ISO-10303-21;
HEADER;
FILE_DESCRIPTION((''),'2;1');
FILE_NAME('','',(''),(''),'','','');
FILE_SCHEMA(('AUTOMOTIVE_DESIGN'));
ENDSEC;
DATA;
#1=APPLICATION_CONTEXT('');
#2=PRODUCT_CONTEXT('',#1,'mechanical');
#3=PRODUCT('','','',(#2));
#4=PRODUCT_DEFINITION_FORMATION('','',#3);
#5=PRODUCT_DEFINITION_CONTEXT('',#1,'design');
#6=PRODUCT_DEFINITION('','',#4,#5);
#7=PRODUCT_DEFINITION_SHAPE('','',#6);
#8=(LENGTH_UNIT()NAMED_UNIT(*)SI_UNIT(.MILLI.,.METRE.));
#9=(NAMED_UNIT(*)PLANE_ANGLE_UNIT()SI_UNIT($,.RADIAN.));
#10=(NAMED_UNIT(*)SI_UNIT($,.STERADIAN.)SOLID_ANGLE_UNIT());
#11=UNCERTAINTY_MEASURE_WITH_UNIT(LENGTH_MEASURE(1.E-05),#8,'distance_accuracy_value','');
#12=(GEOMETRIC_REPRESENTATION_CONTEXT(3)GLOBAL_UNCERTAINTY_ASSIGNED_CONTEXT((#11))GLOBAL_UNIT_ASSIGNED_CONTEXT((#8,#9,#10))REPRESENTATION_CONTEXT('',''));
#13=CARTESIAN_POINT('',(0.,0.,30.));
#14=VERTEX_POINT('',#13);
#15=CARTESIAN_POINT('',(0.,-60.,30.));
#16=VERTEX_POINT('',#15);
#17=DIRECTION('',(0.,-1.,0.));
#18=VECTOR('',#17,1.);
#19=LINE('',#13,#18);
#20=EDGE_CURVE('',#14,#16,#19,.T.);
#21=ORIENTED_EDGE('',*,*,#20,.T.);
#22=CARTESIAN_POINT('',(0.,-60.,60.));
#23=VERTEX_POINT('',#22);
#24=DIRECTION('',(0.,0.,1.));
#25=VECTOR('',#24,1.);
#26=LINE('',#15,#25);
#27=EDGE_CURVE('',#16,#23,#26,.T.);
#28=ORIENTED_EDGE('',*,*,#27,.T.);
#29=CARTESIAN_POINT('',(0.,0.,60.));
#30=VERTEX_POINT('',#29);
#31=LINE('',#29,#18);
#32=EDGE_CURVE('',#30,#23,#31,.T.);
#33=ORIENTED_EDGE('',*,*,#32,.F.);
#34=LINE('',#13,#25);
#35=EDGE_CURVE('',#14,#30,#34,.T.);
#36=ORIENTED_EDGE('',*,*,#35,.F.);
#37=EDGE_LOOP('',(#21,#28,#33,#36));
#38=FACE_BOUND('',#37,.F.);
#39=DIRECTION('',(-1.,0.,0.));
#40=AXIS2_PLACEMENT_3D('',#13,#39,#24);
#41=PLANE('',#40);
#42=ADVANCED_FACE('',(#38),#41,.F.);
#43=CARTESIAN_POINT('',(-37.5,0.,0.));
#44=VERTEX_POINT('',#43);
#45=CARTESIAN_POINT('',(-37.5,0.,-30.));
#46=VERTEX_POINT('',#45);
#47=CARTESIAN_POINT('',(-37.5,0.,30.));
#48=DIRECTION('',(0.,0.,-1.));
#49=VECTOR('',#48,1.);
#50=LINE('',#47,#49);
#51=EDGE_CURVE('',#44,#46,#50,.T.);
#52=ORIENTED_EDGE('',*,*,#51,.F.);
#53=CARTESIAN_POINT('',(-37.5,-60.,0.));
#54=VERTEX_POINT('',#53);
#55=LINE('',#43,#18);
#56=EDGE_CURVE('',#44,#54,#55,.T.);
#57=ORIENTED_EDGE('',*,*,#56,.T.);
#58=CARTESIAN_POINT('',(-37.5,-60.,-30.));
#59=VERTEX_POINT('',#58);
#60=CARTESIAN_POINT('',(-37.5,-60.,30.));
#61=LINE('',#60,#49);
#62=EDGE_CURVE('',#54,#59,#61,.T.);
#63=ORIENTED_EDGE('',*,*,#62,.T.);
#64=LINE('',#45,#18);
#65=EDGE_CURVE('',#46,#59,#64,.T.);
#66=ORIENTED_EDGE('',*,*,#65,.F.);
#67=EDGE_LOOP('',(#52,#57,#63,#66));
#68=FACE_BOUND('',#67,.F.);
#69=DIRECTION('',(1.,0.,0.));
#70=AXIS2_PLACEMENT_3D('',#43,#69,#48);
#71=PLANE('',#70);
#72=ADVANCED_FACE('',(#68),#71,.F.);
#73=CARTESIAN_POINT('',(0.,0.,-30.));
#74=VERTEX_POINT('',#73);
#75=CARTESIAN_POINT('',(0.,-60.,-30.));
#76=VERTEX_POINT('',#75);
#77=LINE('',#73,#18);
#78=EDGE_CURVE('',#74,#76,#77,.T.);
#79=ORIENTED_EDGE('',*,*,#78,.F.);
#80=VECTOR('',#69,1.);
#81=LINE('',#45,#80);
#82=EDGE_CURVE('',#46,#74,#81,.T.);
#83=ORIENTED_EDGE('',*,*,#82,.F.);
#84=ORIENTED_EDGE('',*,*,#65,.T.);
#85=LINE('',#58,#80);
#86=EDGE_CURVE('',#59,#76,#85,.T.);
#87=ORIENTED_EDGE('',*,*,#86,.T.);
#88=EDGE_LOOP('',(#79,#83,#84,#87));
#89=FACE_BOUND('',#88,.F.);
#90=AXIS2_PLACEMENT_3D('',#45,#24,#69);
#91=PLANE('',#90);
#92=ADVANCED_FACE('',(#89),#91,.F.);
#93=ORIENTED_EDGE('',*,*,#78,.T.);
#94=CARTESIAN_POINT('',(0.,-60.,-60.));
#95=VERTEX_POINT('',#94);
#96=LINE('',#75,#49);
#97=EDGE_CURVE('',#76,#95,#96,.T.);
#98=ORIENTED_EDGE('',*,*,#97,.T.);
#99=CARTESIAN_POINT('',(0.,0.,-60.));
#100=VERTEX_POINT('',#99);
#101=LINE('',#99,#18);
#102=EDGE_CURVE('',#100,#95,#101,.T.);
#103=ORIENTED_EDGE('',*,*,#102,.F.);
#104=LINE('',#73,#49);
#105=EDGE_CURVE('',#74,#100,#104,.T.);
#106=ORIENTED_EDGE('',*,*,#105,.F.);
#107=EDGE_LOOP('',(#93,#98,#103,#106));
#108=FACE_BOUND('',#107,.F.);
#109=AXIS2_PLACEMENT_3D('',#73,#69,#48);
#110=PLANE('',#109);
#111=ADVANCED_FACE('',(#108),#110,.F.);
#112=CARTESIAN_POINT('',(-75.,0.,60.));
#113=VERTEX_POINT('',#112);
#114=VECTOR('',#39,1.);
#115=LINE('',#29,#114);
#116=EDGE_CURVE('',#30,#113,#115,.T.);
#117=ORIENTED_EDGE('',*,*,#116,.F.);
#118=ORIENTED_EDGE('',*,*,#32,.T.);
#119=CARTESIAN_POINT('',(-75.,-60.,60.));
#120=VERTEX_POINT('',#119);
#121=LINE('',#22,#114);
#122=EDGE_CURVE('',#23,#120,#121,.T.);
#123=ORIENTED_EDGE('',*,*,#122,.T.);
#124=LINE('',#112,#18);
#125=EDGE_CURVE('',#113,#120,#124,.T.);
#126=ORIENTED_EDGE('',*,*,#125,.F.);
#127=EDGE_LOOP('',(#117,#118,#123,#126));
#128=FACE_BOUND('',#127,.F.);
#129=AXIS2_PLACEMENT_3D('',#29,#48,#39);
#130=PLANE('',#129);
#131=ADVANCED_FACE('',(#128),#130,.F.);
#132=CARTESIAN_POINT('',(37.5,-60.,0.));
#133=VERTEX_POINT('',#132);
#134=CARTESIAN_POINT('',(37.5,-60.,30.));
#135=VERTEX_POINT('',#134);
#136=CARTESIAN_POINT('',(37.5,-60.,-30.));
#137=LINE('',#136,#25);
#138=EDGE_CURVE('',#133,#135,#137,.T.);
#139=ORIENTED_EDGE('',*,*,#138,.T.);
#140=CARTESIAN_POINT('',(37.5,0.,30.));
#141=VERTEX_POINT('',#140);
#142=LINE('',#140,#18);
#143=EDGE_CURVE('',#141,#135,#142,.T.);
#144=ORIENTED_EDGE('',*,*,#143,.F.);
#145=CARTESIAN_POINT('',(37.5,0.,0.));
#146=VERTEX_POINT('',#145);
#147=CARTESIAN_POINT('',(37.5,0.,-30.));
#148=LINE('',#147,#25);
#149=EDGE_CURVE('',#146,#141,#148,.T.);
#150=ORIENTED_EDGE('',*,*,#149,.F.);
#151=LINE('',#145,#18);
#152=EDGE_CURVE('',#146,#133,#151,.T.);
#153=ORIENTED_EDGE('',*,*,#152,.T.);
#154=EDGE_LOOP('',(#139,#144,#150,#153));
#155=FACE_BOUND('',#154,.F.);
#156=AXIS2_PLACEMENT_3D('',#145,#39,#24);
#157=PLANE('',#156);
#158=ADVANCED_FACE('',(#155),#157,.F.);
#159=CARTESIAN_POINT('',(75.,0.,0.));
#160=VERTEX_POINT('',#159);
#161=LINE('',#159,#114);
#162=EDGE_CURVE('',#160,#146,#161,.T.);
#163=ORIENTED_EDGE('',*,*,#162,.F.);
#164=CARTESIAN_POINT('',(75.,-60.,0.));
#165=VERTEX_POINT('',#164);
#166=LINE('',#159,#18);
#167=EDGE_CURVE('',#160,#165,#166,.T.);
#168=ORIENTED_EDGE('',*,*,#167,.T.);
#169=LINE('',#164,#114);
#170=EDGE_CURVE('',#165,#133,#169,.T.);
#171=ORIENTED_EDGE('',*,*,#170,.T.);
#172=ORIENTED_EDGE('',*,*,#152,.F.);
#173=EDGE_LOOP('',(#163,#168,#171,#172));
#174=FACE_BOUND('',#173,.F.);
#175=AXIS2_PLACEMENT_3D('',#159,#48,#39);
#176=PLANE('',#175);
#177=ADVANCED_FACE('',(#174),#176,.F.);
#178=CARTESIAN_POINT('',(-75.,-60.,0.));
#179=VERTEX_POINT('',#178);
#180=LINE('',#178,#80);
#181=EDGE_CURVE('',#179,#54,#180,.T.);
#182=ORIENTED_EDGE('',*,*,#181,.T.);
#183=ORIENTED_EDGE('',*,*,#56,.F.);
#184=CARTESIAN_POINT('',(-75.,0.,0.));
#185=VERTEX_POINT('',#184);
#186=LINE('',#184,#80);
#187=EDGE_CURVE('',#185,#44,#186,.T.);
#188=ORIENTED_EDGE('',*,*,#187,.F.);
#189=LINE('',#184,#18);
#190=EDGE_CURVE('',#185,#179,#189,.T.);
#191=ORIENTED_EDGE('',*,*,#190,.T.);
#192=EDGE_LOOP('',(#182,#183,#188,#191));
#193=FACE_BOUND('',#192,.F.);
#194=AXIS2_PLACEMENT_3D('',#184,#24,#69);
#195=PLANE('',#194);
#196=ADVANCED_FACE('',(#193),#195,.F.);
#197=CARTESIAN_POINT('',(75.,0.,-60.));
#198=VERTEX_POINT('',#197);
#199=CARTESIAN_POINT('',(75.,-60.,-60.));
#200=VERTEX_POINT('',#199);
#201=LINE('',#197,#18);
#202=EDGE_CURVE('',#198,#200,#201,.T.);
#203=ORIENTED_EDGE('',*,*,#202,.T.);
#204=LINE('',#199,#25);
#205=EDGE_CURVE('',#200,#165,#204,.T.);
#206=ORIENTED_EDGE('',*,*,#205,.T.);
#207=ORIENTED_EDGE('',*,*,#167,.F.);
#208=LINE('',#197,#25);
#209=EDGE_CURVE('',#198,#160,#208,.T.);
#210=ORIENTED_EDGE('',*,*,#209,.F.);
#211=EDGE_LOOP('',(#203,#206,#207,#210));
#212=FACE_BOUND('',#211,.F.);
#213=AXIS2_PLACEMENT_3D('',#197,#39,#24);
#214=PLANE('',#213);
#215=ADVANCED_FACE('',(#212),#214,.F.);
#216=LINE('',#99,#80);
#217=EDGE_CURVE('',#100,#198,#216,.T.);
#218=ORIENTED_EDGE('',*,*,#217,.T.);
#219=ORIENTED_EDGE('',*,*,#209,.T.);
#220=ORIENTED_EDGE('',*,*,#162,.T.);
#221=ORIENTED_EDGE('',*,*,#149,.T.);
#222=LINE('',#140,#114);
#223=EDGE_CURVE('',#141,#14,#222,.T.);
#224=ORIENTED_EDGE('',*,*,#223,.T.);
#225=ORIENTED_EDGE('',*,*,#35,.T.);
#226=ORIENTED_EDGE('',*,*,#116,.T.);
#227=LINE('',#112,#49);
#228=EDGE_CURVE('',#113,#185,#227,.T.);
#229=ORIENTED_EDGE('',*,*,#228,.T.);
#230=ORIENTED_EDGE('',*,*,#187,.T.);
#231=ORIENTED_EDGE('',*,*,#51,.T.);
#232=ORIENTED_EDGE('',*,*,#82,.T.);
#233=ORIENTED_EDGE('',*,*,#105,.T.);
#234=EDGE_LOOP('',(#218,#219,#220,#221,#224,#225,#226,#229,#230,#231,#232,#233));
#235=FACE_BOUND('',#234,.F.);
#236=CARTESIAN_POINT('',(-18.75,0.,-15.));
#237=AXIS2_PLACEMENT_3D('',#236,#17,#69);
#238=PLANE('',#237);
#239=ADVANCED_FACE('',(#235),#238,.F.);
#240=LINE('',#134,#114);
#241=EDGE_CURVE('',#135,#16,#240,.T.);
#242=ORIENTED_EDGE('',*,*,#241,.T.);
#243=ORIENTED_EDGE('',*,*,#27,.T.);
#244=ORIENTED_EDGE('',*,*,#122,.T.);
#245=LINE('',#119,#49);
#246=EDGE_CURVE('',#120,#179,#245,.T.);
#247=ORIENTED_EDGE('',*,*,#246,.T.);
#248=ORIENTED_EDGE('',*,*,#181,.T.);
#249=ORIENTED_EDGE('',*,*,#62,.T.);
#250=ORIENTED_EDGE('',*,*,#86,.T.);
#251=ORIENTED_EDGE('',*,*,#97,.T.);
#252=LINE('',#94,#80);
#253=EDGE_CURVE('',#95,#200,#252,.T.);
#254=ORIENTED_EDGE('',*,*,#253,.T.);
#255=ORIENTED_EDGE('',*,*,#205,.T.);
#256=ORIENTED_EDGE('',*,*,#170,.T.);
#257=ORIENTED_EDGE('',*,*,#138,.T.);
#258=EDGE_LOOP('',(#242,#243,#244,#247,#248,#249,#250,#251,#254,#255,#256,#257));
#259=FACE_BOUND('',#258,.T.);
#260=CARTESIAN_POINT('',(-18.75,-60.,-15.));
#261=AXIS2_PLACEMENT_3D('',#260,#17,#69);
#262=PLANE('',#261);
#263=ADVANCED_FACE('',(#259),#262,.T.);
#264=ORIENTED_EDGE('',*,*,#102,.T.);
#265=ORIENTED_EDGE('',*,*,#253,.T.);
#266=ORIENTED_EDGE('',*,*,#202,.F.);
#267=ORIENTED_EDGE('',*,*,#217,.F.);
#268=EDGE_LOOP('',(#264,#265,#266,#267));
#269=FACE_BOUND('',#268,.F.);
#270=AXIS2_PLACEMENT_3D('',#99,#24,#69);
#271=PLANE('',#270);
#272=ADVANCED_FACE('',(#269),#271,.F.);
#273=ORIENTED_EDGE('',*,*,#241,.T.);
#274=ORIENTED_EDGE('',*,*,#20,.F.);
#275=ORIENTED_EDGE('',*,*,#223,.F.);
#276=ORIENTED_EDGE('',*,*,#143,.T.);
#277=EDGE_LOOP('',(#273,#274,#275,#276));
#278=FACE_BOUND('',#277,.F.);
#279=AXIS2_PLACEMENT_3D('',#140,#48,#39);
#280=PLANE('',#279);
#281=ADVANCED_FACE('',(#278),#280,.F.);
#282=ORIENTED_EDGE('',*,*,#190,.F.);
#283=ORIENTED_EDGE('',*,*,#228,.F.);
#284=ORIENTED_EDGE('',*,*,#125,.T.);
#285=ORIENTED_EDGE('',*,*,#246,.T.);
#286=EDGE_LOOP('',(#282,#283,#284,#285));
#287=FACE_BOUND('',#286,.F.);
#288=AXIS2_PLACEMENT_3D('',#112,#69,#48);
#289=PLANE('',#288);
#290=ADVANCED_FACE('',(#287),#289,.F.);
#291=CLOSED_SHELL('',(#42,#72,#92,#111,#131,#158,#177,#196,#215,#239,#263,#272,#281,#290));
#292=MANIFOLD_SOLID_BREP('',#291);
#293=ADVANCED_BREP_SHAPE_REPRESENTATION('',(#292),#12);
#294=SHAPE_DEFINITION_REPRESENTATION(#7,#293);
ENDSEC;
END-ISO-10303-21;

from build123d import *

# Parameters (mm, degrees)
F0_W     = 37.5
F0_H     = 30
F1_DEPTH = 60


with BuildPart() as f1:
    # F0 (on Front) → F1 (new body)
    with BuildSketch(Plane.XZ):
        with Locations((-18.75, -15)):
            Rectangle(F0_W, F0_H)
        with Locations((-18.75, 15)):
            Rectangle(F0_W, F0_H)
        with Locations((18.75, 15)):
            Rectangle(F0_W, F0_H)
        with Locations((18.75, -15)):
            Rectangle(F0_W, F0_H)
        Polygon((-75, 0), (-37.5, 0), (-37.5, 30), (0, 30), (0, 60), (-75, 60), align=None)
        Polygon((75, 0), (37.5, 0), (37.5, -30), (0, -30), (0, -60), (75, -60), align=None)
    extrude(amount=F1_DEPTH)


solid = f1.part
